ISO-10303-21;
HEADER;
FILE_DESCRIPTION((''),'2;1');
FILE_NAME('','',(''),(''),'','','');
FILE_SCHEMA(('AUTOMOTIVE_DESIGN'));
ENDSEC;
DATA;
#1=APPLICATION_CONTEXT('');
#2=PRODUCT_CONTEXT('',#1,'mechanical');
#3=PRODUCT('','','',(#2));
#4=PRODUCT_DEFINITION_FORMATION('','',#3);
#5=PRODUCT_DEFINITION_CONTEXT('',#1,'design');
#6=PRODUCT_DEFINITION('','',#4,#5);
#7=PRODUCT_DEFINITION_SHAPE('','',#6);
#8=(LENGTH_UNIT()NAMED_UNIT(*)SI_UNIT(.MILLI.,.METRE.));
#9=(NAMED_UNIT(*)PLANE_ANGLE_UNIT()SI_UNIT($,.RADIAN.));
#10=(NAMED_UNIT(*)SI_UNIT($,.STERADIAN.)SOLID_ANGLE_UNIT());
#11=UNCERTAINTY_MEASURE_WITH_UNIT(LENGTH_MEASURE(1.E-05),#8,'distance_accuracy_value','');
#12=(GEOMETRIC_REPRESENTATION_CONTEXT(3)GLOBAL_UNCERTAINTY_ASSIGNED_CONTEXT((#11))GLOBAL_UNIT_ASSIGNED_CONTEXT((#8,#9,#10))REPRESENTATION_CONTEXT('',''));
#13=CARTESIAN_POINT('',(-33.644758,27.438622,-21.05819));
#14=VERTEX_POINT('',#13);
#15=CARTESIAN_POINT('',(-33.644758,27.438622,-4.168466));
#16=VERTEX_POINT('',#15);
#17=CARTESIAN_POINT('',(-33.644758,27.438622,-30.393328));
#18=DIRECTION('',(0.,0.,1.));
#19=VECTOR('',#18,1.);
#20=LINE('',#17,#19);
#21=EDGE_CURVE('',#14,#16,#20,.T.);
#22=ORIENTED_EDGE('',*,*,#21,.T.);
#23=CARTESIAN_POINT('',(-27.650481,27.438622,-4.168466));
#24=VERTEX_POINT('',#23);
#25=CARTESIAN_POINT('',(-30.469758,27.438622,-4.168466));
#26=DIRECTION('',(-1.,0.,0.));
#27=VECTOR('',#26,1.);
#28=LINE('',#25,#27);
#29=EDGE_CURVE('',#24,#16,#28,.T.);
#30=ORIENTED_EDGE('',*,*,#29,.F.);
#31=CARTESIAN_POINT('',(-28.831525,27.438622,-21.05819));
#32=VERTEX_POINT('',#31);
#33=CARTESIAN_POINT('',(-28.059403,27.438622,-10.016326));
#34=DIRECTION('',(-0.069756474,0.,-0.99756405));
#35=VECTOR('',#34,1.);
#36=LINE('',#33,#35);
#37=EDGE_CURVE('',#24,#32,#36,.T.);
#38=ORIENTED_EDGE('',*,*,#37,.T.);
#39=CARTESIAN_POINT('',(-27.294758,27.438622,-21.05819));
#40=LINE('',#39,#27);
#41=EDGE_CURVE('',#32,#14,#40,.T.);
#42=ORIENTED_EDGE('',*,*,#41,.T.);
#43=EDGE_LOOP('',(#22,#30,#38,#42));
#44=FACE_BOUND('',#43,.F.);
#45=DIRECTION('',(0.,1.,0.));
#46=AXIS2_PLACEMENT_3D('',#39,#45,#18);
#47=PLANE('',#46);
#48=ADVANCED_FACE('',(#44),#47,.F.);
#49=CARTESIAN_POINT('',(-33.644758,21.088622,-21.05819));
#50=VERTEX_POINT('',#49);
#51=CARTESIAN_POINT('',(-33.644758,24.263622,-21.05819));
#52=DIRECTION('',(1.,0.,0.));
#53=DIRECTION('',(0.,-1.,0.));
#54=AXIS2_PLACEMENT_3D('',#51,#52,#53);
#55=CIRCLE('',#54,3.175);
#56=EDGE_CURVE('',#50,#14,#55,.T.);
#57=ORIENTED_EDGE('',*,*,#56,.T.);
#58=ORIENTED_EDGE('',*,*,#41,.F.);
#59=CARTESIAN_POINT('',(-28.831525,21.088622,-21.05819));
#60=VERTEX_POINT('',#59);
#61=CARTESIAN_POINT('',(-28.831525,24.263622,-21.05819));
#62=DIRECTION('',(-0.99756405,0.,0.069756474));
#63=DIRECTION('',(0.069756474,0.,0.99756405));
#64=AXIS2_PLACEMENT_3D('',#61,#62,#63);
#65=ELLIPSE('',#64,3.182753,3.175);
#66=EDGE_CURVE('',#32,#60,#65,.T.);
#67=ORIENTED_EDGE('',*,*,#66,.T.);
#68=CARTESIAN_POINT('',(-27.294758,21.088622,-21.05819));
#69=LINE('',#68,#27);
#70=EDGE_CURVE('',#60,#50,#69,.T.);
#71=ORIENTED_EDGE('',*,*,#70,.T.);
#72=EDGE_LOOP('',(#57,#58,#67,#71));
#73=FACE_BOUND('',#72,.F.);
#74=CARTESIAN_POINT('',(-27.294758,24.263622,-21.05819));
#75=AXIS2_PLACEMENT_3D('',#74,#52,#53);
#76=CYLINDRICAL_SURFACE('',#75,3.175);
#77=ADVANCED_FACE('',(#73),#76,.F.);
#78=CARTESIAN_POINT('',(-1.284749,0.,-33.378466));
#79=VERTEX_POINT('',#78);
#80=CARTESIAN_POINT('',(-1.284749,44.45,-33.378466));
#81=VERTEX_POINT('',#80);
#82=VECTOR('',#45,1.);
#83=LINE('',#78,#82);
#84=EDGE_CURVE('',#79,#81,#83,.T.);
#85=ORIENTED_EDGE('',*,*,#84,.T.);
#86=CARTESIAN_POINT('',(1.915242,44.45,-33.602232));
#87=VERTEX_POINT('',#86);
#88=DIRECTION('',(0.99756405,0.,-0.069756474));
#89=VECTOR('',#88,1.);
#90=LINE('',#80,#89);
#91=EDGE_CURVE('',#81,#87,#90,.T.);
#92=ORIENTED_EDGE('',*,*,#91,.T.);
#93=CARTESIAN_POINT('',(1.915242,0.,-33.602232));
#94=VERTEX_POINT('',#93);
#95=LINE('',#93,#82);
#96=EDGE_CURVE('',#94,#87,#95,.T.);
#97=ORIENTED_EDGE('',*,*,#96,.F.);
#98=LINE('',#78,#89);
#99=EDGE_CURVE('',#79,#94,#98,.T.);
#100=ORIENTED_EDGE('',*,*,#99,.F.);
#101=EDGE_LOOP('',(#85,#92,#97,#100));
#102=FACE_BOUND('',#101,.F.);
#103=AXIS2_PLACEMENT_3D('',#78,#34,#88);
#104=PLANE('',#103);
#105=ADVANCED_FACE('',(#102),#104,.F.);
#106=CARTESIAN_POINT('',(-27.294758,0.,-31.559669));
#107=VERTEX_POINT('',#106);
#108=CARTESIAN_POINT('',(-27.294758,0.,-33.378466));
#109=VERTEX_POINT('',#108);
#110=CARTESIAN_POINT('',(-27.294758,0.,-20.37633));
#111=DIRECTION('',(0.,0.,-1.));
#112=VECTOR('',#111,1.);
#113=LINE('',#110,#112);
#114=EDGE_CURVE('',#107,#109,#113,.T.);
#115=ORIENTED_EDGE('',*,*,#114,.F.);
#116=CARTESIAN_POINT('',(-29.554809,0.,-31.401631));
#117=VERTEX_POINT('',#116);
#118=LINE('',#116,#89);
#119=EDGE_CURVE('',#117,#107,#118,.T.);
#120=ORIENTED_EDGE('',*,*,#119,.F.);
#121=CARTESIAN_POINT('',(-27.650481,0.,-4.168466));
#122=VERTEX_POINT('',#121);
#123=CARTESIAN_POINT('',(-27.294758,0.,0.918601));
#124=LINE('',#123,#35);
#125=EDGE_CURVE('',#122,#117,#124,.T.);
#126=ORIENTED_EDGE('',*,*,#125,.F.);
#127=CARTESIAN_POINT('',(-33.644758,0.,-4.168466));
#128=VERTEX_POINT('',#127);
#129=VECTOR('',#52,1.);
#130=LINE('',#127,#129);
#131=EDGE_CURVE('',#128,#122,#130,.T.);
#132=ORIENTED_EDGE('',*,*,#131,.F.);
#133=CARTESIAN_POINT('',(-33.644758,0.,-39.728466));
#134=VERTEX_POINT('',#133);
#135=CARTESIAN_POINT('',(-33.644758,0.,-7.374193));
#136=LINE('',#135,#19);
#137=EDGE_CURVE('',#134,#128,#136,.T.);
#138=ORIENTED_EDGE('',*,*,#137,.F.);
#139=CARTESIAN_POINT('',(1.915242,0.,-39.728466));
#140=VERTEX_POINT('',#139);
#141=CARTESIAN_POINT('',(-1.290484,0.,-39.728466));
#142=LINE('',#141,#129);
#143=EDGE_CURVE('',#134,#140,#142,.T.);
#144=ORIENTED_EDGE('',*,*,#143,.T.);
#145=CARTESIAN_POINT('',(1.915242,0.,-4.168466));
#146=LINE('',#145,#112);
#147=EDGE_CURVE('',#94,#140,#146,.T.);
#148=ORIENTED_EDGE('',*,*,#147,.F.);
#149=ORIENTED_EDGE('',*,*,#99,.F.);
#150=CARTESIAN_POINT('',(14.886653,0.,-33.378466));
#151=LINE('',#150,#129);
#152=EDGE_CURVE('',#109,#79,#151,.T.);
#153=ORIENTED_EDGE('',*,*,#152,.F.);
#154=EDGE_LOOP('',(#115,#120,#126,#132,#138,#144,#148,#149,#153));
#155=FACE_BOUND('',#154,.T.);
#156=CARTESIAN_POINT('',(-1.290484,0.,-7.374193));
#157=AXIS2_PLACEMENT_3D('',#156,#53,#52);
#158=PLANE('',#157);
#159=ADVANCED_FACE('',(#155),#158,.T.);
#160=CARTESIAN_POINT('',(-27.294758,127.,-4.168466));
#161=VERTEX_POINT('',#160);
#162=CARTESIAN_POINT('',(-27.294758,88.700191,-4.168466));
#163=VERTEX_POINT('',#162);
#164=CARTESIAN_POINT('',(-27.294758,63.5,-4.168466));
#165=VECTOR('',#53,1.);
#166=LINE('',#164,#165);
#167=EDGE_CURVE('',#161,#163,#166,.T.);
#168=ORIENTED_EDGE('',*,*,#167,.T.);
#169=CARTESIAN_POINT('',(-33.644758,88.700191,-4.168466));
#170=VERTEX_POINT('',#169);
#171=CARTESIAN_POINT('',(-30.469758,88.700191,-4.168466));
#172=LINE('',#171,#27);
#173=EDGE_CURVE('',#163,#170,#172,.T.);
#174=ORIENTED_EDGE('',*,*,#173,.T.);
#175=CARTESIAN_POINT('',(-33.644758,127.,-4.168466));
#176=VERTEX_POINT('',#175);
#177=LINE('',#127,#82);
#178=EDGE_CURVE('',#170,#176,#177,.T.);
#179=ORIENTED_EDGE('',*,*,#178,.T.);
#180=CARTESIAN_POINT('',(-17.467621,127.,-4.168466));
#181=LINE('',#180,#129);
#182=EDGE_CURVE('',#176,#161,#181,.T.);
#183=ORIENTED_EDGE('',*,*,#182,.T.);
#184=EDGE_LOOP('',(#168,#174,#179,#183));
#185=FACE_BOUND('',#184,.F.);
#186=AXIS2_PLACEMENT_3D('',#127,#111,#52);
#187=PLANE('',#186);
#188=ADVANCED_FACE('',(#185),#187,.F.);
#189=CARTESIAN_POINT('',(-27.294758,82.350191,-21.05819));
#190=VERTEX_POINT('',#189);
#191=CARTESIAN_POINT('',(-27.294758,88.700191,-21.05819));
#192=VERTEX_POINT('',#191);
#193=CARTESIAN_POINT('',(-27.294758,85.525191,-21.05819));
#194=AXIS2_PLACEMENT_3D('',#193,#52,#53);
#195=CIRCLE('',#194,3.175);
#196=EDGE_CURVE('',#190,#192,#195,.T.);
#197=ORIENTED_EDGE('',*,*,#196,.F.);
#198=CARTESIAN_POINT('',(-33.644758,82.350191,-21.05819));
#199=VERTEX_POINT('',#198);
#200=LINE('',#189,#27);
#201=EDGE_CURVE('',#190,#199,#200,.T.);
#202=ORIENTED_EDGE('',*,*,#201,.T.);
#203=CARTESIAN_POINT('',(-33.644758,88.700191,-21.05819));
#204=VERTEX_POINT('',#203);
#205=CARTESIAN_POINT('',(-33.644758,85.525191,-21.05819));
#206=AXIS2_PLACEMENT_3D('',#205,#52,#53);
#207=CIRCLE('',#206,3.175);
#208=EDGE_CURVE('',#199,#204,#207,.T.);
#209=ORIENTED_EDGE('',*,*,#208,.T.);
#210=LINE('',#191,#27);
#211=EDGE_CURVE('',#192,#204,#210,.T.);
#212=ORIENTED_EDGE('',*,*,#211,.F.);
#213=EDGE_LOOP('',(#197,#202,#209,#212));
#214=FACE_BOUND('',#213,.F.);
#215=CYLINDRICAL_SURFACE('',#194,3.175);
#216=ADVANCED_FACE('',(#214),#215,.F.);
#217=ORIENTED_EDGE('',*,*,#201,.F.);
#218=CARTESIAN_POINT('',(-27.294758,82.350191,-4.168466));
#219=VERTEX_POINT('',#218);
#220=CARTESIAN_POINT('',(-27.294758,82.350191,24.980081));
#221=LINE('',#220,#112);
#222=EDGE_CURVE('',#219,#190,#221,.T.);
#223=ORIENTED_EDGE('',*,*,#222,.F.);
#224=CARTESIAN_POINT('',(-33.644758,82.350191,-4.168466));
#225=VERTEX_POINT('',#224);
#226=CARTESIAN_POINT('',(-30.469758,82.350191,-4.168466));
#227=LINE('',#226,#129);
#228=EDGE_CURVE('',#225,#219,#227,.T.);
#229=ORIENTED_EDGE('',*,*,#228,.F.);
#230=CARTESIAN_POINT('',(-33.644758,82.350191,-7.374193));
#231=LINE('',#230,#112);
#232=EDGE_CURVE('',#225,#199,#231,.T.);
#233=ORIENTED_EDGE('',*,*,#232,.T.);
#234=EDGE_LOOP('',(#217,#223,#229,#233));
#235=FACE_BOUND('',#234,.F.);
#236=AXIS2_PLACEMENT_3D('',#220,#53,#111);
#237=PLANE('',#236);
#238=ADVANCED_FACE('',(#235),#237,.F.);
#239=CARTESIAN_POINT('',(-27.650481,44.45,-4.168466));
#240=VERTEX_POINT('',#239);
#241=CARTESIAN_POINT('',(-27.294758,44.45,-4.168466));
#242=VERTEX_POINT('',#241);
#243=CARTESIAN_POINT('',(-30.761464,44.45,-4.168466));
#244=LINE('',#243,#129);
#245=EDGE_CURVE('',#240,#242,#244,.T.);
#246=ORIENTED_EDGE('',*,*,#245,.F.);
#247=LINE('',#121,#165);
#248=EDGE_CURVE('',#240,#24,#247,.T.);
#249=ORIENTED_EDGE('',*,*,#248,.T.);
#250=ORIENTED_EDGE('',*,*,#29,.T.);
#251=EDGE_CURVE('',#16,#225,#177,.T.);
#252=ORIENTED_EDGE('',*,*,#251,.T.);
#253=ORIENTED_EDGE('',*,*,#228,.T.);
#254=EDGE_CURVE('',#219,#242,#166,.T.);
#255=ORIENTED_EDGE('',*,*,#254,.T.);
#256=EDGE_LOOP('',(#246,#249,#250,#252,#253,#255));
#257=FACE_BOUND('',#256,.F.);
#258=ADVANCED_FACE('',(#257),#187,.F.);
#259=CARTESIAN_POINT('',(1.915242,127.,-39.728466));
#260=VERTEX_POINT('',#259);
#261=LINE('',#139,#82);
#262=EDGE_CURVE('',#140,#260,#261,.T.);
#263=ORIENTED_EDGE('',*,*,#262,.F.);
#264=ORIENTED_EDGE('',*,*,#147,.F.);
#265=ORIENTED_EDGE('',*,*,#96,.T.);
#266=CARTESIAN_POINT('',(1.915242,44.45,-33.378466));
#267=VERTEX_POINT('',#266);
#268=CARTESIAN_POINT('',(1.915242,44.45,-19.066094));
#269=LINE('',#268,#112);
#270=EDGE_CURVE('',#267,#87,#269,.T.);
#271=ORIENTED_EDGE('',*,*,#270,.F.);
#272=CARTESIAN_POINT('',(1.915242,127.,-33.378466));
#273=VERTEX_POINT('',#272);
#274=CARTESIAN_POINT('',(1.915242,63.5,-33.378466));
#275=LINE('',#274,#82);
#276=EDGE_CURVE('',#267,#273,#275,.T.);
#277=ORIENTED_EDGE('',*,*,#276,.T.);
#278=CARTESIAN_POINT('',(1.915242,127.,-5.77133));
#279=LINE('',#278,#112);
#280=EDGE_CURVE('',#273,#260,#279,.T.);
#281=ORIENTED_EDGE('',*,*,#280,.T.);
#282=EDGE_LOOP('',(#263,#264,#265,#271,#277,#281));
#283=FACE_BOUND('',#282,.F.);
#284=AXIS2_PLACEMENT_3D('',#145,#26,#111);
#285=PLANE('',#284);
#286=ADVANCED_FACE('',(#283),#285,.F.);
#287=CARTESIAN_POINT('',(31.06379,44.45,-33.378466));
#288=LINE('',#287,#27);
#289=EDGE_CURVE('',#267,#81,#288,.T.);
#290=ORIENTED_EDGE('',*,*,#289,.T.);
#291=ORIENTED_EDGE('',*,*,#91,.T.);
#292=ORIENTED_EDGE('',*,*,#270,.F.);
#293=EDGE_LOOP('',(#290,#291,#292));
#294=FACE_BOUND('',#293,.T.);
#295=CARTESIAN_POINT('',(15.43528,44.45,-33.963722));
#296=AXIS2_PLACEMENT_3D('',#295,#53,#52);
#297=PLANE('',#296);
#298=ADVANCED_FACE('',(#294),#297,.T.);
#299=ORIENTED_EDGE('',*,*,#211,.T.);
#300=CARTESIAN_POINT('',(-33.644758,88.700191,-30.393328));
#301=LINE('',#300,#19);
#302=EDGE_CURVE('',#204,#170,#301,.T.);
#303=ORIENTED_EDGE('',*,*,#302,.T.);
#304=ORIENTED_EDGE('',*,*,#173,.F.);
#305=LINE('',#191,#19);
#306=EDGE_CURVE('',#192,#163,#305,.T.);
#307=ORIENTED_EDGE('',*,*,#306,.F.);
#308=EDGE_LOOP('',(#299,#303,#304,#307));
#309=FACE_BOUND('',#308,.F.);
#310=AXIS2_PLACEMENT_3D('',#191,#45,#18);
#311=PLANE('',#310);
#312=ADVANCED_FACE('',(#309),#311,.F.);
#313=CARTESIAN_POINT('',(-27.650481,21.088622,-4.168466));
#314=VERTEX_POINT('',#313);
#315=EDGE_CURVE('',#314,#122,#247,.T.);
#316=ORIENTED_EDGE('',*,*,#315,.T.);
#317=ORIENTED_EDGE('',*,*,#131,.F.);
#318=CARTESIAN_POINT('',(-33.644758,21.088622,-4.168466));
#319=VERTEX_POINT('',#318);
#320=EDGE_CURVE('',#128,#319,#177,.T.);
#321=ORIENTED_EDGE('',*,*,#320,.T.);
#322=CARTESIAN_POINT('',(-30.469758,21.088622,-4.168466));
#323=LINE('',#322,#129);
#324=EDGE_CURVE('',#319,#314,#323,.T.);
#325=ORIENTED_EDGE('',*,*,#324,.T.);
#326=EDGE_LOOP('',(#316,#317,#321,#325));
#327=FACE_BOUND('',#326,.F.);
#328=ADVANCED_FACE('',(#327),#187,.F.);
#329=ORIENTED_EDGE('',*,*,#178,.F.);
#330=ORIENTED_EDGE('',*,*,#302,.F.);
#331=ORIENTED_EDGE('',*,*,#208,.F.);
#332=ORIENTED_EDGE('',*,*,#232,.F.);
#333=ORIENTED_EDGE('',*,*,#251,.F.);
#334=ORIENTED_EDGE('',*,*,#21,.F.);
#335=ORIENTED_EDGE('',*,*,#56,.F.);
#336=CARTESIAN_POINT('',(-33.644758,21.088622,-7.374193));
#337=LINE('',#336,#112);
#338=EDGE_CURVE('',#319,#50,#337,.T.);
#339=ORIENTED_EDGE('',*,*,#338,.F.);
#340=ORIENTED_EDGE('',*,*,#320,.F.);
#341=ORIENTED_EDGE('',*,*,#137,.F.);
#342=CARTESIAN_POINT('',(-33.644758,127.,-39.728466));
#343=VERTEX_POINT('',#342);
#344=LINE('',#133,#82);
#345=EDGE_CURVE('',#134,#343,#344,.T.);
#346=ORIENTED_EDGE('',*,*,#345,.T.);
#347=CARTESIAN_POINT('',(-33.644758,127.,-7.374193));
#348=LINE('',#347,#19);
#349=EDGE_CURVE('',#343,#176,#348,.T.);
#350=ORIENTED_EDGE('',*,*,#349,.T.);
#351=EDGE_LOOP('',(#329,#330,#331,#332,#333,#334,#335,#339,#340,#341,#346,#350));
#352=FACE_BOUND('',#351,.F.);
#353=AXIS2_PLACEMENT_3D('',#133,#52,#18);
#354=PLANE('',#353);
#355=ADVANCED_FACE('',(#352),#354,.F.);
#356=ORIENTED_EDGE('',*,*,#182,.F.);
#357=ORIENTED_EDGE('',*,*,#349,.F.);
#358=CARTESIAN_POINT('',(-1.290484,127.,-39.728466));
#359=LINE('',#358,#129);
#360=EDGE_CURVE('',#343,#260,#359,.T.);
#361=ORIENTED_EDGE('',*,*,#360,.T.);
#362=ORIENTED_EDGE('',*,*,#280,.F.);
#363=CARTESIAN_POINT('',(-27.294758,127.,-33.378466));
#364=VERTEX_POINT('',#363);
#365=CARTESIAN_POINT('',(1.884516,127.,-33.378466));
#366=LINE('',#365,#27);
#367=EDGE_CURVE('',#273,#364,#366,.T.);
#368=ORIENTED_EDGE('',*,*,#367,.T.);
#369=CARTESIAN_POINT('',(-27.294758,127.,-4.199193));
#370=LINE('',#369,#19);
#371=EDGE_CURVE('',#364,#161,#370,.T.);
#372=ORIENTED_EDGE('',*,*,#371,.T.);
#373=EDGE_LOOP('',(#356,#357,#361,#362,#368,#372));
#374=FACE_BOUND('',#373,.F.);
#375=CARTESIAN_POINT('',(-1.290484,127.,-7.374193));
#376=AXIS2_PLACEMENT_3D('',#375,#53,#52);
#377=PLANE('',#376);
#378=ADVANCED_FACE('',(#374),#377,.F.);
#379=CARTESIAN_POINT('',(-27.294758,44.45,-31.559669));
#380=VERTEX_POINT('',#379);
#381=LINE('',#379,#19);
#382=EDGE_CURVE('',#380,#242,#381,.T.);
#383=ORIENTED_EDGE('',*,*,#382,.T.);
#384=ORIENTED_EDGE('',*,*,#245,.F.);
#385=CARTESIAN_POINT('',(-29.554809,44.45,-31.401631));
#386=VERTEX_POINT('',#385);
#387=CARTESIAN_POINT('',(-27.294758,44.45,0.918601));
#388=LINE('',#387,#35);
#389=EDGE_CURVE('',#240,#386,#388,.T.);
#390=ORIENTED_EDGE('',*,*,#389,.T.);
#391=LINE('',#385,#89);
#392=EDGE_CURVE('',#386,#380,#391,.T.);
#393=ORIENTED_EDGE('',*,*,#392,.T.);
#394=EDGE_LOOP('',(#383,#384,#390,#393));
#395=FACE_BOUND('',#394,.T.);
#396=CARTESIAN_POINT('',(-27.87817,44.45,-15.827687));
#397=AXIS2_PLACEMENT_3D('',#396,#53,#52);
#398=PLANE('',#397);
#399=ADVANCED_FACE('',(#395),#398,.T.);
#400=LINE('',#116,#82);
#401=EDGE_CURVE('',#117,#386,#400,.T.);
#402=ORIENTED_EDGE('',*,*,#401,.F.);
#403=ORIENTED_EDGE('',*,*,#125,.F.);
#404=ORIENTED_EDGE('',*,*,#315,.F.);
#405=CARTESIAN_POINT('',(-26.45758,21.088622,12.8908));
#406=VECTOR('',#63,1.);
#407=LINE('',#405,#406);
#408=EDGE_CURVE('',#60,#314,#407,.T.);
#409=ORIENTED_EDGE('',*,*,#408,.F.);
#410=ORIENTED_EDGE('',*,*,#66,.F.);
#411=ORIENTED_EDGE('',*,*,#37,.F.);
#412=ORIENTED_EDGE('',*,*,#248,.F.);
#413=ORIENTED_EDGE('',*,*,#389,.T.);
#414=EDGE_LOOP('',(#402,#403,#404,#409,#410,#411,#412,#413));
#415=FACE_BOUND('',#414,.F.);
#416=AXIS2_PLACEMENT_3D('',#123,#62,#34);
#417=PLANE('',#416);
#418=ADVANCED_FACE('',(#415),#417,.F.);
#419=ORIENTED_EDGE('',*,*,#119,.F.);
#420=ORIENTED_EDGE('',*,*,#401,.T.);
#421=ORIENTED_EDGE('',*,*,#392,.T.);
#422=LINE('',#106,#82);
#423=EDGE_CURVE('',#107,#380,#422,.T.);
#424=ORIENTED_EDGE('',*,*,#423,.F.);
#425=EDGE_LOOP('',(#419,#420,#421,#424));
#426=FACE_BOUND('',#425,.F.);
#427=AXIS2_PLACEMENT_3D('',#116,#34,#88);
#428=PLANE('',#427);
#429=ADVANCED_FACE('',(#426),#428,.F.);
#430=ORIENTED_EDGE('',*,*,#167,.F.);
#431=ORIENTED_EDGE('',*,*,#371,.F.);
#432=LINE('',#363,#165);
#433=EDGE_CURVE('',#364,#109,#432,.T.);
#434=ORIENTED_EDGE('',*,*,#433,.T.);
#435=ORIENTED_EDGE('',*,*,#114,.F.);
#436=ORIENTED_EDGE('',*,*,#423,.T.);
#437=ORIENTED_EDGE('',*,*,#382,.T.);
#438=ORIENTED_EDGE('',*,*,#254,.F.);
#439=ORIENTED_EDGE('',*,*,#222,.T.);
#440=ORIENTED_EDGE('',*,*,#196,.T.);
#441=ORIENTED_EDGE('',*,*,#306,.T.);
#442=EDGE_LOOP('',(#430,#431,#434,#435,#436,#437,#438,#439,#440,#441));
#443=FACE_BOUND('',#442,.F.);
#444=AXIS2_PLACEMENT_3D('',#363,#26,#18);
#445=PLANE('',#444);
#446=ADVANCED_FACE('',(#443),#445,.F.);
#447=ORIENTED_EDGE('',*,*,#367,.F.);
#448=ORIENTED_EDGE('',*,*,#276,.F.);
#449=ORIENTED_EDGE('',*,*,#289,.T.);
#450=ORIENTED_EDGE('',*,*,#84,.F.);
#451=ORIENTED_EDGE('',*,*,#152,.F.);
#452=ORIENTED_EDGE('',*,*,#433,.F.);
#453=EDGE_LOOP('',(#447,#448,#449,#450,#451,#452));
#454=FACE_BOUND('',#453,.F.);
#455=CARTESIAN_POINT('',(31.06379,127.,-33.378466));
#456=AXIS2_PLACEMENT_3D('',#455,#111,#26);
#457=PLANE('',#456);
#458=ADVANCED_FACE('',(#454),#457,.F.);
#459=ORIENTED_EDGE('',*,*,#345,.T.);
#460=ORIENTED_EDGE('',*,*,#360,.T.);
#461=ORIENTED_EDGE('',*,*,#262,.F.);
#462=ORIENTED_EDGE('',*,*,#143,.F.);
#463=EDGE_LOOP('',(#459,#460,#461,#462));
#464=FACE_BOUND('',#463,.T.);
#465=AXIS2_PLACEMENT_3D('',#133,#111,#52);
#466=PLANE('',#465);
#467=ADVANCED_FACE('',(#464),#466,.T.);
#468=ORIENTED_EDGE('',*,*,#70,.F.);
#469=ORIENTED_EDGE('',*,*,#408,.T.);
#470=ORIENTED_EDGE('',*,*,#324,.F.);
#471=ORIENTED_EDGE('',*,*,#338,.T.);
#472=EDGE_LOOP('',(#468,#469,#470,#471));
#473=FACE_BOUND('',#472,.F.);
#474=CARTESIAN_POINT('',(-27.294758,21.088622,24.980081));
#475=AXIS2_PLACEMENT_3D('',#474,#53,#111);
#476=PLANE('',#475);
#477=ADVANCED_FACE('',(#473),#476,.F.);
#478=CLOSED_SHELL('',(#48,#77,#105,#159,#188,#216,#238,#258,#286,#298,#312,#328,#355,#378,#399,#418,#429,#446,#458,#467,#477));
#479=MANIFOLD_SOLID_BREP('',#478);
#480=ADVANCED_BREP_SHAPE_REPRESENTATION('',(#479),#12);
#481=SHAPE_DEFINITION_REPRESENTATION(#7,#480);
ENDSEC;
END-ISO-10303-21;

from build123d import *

# Parameters (mm, degrees)
F0_W     = 64.7085476667
F0_H     = 64.7085476667
F1_DEPTH = 127
F2_W     = 58.3585476667
F2_H     = 58.3585476667
F3_DEPTH = 127.001
F5_DEPTH = 44.45
F6_W     = 6.35
F6_H     = 24.0614805496
F7_DEPTH = 6.351
F9_DEPTH = 127.001


# Not quite as in the source:
# - a feature names something its author has since deleted; it is built from what else it names


with BuildPart() as f1:
    # F0 (on Front) → F1 (new body)
    with BuildSketch(Plane.XZ):
        with Locations((-1.2904843315, -7.374192588)):
            Rectangle(F0_W, F0_H)
    extrude(amount=-F1_DEPTH)

    # F2 (on face) → F3 (cut, through all)
    with BuildSketch(Plane(origin=(0, 127, 0), x_dir=(-1, 0, 0), z_dir=(0, 1, 0))):
        with Locations((-1.8845156685, -4.199192588)):
            Rectangle(F2_W, F2_H)
    extrude(amount=-F3_DEPTH, mode=Mode.SUBTRACT)

    # F4 (on face) → F5 (cut)
    with BuildSketch(Plane.XZ):
        Polygon((-27.2947581649, -31.5596693708), (-27.2947581649, 0.9186006957), (-29.554808952, -31.4016312239), align=None)
        Polygon((31.0637895018, -33.3784664214), (-1.2847486443, -33.3784664214), (31.0637895018, -35.6404965727), align=None)
    extrude(amount=-F5_DEPTH, mode=Mode.SUBTRACT)

    # F6 (on face) → F7 (cut, through all)
    with BuildSketch(Plane.YZ.offset(-27.2947581649)):
        with Locations((24.2636220248, 12.9493409705)):
            Rectangle(F6_W, F6_H)
        with BuildLine():
            Line((27.4386220248, -21.0581904151), (27.4386220248, 0.9186006957))
            Line((27.4386220248, 0.9186006957), (21.0886220248, 0.9186006957))
            Line((21.0886220248, 0.9186006957), (21.0886220248, -21.0581904151))
            ThreePointArc((21.0886220248, -21.0581904151), (24.2636220248, -24.2331904151), (27.4386220248, -21.0581904151))
        make_face()
        with BuildLine():
            Line((88.7001905876, 24.9800812453), (82.3501905876, 24.9800812453))
            Line((82.3501905876, 24.9800812453), (82.3501905876, -21.0581904151))
            ThreePointArc((82.3501905876, -21.0581904151), (85.5251905876, -24.2331904151), (88.7001905876, -21.0581904151))
            Line((88.7001905876, -21.0581904151), (88.7001905876, 24.9800812453))
        make_face()
    extrude(amount=-F7_DEPTH, mode=Mode.SUBTRACT)

    # F8 (on face) → F9 (cut, through all)
    with BuildSketch(Plane.XZ):
        Polygon((-27.2947581649, 0.9186006957), (-27.6504805517, -4.1684664214), (1.9152418351, -4.1684664214), (1.9152418351, 31.3519202173), (-33.6447581649, 31.3519202173), (-33.6447581649, 24.9800812453), (-27.2947581649, 24.9800812453), align=None)
        Polygon((-33.6447581649, 24.9800812453), (-33.6447581649, -4.1684664214), (-27.6504805517, -4.1684664214), (-27.2947581649, 0.9186006957), (-27.2947581649, 24.9800812453), align=None)
        Polygon((1.9152418351, -33.6022315546), (1.9152418351, -39.7284664214), (31.0637895018, -39.7284664214), (31.0637895018, -35.6404965727), align=None)
        Polygon((1.9152418351, -4.1684664214), (1.9152418351, -33.6022315546), (31.0637895018, -35.6404965727), (31.0637895018, 31.3519202173), (1.9152418351, 31.3519202173), align=None)
    extrude(amount=-F9_DEPTH, mode=Mode.SUBTRACT)


solid = f1.part
